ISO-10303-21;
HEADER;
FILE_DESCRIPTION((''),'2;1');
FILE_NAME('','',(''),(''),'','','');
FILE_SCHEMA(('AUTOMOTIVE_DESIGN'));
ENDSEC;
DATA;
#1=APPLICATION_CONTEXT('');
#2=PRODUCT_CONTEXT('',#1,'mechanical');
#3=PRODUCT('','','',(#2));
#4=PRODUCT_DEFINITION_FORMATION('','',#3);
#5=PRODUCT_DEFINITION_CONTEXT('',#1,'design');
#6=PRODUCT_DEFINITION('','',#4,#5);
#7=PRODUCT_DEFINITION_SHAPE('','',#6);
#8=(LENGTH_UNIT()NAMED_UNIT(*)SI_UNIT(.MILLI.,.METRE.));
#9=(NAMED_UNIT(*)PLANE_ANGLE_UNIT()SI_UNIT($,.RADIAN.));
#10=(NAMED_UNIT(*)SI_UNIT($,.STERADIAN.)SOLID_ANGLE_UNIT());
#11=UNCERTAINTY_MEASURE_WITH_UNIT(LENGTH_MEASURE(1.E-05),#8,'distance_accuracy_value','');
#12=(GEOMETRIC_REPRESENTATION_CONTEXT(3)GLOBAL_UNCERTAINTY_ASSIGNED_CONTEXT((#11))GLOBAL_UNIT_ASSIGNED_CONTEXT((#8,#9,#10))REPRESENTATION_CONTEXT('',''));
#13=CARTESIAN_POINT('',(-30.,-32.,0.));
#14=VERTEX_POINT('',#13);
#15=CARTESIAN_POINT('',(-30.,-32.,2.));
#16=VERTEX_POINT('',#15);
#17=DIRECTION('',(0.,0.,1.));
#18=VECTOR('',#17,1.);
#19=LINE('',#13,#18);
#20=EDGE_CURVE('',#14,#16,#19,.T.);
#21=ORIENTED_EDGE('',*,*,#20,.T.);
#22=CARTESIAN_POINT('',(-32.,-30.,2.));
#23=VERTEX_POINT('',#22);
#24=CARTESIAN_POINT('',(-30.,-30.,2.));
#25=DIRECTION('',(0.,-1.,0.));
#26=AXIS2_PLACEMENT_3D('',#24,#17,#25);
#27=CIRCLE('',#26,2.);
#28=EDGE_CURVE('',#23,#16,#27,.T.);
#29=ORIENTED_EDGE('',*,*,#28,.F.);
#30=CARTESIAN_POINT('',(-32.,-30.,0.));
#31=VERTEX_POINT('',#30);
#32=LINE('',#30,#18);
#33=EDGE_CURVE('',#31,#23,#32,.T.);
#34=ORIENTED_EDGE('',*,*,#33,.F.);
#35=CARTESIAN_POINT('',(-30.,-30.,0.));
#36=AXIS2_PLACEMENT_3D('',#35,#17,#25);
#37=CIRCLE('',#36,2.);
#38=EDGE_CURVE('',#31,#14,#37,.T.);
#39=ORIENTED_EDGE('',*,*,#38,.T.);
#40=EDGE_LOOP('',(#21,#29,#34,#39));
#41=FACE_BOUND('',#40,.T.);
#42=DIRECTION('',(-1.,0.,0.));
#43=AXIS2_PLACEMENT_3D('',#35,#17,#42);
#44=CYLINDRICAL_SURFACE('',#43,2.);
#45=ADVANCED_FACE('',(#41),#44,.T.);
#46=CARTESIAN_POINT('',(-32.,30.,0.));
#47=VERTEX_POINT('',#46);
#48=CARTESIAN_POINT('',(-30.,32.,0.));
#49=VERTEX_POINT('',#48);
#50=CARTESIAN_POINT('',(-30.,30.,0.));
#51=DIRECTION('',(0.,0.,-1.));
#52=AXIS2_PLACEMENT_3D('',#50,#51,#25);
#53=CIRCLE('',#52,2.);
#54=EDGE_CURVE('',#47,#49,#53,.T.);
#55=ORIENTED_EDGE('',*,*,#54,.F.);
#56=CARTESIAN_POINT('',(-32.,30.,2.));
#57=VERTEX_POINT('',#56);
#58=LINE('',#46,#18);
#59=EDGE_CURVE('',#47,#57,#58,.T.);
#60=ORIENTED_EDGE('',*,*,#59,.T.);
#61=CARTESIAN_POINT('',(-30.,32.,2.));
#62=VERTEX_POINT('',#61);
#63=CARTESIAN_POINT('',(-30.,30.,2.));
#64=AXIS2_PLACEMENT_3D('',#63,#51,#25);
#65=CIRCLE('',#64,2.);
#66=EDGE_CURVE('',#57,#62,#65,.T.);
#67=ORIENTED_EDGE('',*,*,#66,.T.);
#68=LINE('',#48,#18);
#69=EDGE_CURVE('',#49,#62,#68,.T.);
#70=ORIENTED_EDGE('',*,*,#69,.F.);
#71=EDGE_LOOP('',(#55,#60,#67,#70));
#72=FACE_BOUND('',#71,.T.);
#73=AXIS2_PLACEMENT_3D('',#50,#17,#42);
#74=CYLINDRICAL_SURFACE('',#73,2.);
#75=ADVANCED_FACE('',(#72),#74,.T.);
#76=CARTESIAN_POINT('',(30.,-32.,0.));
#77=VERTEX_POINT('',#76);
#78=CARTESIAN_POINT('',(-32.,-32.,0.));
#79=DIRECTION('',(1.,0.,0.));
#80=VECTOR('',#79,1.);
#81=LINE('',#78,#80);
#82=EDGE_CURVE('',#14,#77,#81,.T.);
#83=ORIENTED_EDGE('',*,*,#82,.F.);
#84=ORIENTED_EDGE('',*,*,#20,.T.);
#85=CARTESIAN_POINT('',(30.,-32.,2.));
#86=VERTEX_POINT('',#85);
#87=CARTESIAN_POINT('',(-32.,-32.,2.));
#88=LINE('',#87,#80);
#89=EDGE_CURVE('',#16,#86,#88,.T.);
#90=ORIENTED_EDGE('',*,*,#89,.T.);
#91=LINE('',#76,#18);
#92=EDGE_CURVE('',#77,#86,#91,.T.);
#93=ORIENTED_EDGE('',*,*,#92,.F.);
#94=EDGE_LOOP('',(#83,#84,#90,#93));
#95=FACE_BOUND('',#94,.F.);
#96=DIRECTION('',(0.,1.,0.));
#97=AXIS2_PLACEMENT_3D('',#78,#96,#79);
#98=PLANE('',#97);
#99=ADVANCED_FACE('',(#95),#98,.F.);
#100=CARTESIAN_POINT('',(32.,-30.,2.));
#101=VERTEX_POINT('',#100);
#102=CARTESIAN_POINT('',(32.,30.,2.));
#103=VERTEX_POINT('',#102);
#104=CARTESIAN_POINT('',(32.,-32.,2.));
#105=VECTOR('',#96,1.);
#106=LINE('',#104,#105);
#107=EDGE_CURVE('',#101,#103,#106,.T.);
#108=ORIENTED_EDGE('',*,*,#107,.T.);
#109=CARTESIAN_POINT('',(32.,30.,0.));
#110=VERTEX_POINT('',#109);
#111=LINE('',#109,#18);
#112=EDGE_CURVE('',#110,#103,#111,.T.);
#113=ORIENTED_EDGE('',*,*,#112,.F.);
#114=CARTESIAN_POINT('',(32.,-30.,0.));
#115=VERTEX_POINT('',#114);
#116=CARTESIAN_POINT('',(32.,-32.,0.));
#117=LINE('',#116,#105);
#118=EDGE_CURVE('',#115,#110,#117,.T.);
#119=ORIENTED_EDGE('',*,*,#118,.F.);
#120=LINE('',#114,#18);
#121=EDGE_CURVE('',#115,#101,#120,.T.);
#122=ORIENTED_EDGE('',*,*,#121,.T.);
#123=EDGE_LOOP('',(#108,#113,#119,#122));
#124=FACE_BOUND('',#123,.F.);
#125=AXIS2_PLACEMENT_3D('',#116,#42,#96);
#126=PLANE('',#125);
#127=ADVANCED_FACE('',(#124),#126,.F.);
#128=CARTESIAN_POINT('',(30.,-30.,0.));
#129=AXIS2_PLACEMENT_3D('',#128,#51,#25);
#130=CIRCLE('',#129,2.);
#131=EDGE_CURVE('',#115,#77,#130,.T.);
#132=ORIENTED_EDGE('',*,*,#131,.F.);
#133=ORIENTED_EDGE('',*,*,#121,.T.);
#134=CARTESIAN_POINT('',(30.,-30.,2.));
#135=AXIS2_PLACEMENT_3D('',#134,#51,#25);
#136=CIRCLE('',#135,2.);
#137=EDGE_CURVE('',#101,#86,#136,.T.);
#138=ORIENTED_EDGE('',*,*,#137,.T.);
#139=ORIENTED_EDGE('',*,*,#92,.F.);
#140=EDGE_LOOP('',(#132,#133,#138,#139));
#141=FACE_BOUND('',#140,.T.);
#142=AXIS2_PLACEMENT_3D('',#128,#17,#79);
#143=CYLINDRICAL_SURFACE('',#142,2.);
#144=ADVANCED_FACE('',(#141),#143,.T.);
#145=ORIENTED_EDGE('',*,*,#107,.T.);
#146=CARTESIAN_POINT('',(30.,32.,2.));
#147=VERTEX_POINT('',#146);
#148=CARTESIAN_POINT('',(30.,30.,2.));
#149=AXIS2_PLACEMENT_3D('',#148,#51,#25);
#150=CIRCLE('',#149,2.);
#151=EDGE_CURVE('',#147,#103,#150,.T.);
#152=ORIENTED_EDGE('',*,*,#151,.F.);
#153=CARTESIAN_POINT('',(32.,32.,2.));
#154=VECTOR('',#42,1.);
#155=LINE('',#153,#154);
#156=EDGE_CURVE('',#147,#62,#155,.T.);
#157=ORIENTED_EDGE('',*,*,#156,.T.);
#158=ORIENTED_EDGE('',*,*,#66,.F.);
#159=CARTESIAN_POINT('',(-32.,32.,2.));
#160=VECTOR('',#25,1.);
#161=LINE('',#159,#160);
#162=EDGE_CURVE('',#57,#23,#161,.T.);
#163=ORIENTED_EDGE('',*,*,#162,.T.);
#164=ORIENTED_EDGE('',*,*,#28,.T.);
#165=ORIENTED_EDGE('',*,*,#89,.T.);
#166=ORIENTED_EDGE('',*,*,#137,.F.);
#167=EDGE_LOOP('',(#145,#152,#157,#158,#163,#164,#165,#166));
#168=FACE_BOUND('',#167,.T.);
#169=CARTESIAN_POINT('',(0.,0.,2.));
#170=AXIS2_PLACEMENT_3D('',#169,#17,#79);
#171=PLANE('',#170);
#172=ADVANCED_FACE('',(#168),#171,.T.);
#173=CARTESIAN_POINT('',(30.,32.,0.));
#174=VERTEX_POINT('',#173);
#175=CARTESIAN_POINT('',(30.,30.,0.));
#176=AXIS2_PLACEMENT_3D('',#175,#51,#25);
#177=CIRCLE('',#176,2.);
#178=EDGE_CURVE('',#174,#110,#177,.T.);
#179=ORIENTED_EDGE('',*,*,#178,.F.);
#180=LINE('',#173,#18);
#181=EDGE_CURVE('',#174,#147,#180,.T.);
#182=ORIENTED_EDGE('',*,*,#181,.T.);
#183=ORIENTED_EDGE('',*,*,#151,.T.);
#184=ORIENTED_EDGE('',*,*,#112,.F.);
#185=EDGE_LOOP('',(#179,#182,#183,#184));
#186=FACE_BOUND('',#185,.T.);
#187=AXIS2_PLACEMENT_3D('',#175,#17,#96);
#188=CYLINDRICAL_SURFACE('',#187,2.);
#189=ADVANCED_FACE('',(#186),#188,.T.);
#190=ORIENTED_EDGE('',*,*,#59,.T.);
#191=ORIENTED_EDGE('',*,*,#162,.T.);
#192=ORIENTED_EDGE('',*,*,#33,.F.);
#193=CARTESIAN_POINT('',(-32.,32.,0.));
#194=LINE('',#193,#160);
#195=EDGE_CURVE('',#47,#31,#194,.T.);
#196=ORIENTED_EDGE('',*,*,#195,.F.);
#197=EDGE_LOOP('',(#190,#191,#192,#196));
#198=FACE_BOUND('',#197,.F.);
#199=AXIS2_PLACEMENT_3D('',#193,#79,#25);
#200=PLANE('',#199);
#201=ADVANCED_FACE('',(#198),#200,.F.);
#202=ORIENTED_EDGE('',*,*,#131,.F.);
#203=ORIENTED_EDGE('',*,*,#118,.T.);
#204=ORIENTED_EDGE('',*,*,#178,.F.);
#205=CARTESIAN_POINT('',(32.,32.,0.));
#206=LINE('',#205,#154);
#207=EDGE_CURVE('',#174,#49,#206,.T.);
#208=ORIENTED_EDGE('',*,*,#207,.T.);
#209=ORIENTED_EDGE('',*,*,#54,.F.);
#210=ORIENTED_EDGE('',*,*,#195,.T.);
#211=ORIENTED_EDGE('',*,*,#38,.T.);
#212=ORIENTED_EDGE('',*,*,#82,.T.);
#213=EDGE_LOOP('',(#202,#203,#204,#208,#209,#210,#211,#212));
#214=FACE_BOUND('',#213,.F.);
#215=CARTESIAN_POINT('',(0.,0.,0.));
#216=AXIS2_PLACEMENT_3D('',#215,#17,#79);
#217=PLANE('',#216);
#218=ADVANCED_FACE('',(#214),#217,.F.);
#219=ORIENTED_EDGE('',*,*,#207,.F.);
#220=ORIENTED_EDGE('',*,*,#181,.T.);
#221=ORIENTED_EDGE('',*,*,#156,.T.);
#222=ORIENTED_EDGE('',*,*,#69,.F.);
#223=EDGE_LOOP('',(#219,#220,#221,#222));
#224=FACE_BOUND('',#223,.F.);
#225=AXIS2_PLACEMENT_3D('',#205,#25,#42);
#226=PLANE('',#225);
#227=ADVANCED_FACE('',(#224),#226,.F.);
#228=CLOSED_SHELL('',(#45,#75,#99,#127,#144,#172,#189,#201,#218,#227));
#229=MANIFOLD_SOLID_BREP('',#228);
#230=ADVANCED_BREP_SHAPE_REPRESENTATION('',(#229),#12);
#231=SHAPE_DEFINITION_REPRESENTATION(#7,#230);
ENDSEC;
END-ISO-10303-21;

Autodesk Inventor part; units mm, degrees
ref_plane "YZ Plane" through (0, 0, 0) normal (1, 0, 0) x (0, 1, 0)
ref_plane "XZ Plane" through (0, 0, 0) normal (0, 1, 0) x (-1, 0, 0)
ref_plane "XY Plane" through (0, 0, 0) normal (0, 0, 1) x (1, 0, 0)
sketch "Sketch1" plane through (0, 0, 0) normal (0, 0, 1) x (1, 0, 0)
  line L0 (-32, -32) -> (32, -32)
  line L1 (32, -32) -> (32, 32)
  line L2 (32, 32) -> (-32, 32)
  line L3 (-32, 32) -> (-32, -32)
  line L4 (-32, -32) -> (32, 32) construction
  line L5 (32, -32) -> (-32, 32) construction
  point P0 (0, 0)
  dimension "d154" = 64
  dimension "d155" = 64
extrude "Plate5" add sketch "Sketch1" along normal blind 2
fillet "Corner Round1" radius 2 4 edges at (32, 32, 1) (-32, -32, 1) (-32, 32, 1) (32, -32, 1)
sketch "Sketch11" plane through (-50.5, -22, -28) normal (1, 0, 0) x (0, 0, -1)
  line L0 (-25.25, 44) -> (-25.25, 0) construction
  line L1 (0, 0) -> (-25.25, 0) construction
  line L2 (0, 0) -> (0, 44) construction
  line L3 (0, 44) -> (-25.25, 44) construction
  circle A0 centre (-10, 22) radius 5.5
  point P0 (-28, 22)
  point P1 (0, 22)
  dimension "d192" = 11
  dimension "d193" = 10
cut "Cut3" [suppressed]
feature "Corner Round3" [suppressed]
sketch "Sketch10" plane through (-34, 30, 2) normal (1, 0, 0) x (0, 1, 0)
  line L0 (-60, 0) -> (0, 0)
  line L1 (0, 0) -> (0, -30)
  line L2 (0, -30) -> (-60, -30)
  line L3 (-60, -30) -> (-60, 0)
properties part number "SLM 1424 FDS diam way cup" material "Stainless Steel"
